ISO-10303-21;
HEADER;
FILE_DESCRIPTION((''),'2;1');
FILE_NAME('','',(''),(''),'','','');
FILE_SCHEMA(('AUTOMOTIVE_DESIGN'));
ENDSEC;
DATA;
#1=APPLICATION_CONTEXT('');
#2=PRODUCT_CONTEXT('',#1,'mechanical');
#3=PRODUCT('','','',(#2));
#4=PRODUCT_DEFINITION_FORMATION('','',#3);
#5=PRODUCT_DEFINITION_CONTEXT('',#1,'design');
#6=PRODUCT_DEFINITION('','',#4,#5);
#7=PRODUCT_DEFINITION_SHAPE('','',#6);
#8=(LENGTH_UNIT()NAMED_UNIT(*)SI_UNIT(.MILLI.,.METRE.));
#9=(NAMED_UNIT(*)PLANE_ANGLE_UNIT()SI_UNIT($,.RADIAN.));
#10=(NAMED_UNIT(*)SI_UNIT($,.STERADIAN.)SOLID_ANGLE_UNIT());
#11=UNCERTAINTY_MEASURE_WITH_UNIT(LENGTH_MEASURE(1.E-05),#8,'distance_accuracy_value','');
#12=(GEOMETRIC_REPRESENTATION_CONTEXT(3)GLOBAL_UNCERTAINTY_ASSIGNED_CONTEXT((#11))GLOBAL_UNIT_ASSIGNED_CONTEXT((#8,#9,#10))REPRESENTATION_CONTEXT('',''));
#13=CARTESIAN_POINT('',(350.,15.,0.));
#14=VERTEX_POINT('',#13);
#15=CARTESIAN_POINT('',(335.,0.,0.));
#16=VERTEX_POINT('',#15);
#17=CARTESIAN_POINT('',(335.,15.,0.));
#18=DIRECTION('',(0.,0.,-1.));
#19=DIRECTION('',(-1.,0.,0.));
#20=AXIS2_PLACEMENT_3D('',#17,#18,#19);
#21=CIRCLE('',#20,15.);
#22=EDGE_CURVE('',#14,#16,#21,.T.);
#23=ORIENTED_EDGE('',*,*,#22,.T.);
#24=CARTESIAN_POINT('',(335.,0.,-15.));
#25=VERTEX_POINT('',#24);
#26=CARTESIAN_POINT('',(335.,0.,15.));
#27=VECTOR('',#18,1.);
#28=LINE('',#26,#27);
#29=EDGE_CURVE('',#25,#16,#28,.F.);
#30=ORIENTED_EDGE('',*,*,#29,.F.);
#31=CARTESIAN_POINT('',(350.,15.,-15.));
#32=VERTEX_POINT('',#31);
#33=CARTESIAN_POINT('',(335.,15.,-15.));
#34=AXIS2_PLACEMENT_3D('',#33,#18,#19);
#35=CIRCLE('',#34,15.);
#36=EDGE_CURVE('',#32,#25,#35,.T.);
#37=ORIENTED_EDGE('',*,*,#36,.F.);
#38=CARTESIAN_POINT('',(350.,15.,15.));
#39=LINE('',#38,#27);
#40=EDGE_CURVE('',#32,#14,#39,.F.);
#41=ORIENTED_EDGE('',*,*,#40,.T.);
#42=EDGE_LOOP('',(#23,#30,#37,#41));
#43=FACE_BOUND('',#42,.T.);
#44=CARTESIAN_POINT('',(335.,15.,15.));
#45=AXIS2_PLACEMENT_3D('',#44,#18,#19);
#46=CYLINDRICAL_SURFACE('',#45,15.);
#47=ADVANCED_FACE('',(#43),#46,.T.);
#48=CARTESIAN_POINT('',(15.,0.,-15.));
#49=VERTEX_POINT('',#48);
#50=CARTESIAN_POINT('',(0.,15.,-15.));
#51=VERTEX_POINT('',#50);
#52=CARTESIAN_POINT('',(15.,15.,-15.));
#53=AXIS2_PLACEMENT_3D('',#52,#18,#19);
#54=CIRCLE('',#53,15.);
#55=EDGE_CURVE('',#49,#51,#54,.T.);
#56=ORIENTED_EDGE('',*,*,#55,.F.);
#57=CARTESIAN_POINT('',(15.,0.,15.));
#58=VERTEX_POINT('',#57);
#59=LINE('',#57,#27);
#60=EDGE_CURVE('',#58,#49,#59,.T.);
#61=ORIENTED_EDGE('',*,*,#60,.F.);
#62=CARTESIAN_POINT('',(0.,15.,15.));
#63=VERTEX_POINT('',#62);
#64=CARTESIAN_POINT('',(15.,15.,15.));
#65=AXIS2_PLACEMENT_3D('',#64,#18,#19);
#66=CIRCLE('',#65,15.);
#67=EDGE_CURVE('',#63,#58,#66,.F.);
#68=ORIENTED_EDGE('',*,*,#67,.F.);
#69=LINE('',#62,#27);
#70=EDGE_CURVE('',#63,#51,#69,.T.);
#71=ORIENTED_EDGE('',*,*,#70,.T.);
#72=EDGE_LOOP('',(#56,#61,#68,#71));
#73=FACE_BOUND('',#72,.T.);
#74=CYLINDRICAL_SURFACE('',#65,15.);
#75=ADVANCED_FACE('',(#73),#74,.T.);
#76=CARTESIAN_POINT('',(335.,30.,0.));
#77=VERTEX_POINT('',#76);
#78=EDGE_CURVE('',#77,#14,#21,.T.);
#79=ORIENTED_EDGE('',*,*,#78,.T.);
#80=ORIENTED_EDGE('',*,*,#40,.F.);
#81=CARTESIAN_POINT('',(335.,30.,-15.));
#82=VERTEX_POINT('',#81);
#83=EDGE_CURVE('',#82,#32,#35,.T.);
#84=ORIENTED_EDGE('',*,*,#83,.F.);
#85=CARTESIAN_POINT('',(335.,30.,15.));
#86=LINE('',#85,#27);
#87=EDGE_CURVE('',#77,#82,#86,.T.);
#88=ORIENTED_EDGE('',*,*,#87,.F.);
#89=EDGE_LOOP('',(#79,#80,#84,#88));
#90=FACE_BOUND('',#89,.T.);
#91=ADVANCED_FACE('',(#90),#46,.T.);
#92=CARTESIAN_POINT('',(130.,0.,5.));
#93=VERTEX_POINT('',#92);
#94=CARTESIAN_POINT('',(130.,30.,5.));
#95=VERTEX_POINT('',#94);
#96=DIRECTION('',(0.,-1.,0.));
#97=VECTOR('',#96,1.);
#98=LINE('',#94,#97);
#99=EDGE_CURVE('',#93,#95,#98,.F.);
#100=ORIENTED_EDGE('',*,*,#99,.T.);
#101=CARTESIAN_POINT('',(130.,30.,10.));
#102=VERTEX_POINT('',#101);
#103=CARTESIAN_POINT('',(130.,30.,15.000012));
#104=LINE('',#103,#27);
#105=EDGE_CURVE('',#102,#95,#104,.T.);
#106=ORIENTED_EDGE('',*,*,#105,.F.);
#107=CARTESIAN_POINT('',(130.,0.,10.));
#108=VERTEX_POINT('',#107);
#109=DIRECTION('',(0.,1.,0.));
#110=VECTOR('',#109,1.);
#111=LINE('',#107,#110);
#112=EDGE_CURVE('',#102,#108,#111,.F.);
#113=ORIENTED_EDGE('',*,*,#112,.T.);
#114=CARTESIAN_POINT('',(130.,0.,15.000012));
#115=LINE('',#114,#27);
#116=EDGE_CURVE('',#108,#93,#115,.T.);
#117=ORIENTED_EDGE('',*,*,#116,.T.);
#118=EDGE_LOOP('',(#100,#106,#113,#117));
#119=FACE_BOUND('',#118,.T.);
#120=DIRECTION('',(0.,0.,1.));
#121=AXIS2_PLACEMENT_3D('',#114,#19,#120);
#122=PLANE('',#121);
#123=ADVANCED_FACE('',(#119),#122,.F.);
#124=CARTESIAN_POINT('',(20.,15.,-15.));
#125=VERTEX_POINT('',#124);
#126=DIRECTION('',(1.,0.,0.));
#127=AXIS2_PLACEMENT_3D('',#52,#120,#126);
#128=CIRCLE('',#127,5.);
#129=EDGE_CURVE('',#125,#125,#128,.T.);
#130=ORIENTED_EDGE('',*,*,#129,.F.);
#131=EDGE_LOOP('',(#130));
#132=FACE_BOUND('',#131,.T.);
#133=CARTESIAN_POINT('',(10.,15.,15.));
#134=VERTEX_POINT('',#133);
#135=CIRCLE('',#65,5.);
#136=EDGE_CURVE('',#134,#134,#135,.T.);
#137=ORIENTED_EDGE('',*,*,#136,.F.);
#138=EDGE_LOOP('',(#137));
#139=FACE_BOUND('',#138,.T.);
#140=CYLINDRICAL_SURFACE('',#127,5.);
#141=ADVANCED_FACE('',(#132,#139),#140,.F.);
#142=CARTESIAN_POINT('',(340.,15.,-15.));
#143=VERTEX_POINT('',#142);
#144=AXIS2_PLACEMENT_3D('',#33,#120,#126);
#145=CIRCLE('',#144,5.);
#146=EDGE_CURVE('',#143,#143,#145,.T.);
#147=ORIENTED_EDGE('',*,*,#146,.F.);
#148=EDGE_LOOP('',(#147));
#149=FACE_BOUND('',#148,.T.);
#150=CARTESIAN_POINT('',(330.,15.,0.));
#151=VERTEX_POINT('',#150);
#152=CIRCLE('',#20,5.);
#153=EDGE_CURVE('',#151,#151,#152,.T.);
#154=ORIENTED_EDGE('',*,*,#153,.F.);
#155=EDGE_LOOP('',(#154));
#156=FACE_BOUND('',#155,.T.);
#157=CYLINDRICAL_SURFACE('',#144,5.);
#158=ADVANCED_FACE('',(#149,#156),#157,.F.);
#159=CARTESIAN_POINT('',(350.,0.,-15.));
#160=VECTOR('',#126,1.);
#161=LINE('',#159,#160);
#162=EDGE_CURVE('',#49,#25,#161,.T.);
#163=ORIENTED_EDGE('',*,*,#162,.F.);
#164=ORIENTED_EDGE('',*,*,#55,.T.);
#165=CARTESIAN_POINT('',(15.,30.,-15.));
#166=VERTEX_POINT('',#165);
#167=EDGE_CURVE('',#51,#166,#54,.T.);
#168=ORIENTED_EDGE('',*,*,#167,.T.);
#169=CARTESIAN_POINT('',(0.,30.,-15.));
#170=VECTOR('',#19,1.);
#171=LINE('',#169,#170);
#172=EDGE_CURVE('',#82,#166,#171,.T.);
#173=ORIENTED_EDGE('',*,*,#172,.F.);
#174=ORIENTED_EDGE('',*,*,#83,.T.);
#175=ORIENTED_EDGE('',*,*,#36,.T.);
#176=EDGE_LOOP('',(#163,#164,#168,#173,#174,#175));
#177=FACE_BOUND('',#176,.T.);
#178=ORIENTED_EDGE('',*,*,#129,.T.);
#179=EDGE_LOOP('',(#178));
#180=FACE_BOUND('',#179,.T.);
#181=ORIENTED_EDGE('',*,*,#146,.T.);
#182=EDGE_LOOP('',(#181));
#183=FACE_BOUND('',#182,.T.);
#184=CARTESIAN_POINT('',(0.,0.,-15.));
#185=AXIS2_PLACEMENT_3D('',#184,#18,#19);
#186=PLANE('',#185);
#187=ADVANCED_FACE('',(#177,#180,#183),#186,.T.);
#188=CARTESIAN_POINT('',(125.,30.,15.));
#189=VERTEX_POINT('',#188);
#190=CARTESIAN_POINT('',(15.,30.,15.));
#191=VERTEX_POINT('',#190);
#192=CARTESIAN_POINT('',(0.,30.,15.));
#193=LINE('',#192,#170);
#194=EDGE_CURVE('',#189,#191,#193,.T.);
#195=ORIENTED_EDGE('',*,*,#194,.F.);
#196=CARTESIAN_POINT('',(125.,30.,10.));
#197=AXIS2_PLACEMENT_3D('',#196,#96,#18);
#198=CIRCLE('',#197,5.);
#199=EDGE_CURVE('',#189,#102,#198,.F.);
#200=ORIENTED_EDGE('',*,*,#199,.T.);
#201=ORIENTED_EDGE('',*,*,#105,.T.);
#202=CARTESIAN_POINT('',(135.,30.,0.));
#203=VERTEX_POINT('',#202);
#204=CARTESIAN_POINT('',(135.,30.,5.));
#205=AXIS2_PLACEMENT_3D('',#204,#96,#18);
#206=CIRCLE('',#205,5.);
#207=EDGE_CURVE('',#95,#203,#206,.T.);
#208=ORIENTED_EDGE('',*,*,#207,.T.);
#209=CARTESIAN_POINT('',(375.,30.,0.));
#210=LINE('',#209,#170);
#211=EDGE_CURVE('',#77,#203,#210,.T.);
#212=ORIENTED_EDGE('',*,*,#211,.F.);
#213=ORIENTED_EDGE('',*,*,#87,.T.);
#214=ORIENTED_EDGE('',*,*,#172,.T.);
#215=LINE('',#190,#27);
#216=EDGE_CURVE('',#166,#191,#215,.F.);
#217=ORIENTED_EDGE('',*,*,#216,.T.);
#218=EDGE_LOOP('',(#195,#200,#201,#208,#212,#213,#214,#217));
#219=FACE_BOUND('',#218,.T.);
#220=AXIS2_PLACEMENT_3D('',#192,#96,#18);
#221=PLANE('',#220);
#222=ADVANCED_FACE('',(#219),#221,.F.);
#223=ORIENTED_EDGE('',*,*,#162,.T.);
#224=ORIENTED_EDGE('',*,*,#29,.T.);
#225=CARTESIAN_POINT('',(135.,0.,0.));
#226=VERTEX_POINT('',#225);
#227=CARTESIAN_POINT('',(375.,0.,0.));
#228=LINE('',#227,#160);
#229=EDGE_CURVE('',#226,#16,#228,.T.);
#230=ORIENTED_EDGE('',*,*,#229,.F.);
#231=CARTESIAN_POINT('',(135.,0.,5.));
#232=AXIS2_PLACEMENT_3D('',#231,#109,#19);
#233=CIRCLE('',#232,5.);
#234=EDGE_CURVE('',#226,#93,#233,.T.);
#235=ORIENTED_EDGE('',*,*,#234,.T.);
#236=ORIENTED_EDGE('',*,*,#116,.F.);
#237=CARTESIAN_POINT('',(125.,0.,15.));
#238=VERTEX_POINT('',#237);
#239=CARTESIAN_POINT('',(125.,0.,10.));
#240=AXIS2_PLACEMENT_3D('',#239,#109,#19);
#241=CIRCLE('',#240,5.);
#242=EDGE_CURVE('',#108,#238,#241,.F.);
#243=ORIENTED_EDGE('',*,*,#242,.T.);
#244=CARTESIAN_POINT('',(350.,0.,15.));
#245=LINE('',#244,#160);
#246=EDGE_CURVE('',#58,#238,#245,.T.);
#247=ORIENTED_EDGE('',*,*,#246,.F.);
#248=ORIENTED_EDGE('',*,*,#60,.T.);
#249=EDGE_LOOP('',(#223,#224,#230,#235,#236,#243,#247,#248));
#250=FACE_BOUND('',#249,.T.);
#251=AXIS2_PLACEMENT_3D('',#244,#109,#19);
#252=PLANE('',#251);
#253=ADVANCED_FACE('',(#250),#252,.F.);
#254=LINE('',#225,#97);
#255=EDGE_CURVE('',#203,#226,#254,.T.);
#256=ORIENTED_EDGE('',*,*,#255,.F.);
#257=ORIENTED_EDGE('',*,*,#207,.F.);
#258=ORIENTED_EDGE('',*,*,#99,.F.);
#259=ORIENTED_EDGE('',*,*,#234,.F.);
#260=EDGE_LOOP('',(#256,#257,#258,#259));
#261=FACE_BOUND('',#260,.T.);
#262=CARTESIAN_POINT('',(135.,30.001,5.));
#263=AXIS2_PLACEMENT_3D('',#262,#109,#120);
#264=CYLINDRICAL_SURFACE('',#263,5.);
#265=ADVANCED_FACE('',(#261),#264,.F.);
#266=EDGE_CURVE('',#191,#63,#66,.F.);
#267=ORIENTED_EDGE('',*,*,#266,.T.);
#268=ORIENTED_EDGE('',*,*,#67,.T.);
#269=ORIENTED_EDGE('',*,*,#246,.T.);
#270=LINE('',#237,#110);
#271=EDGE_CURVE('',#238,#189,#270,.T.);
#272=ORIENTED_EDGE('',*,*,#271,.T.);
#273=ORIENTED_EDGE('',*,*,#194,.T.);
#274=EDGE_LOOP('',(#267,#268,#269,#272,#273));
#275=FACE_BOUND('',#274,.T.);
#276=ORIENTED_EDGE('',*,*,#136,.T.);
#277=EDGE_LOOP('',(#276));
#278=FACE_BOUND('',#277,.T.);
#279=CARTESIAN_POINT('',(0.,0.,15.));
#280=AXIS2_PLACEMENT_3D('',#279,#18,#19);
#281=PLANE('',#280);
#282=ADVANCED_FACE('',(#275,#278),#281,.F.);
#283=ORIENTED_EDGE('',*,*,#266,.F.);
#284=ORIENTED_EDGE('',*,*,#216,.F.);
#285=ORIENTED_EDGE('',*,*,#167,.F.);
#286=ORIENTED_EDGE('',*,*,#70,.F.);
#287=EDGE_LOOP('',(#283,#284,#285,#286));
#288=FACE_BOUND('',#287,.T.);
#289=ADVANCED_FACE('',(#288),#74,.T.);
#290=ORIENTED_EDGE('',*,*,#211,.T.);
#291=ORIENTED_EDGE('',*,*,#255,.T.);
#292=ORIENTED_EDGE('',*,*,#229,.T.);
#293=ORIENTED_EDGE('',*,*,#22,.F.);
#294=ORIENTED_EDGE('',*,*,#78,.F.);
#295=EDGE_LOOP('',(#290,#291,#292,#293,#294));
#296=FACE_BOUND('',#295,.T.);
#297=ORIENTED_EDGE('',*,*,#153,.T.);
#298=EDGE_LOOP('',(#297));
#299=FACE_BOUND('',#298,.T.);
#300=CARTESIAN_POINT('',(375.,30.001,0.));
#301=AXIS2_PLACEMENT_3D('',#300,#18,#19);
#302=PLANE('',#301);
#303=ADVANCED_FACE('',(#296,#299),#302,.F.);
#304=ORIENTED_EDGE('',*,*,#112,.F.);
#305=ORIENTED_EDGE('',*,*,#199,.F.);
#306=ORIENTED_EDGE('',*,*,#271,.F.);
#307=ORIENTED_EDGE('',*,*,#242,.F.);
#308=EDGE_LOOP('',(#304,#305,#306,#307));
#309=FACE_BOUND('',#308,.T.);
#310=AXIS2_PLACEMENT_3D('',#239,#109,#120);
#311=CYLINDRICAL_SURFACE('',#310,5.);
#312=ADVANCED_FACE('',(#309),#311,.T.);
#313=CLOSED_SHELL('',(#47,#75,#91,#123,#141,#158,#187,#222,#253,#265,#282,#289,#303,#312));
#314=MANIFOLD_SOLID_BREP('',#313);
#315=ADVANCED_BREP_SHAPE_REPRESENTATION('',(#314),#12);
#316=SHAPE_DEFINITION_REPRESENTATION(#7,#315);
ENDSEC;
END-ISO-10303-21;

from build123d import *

# Parameters (mm, degrees)
SKETCH1_W               = 350
SKETCH1_H               = 30
BOSS_EXTRUDE1_DEPTH     = 15
CUT_EXTRUDE2_DEPTH      = 353.562051276
CUT_EXTRUDE2_DEPTH_BACK = 353.562051276
SKETCH3_R               = 5
FILLET3_R               = 15
CUT_EXTRUDE3_DEPTH      = 353.562051276
CUT_EXTRUDE3_DEPTH_BACK = 10
SKETCH4_R               = 5
FILLET4_R               = 5
CUT_EXTRUDE4_REACH      = 353.603
SKETCH6_W               = 245
SKETCH6_H               = 5
FILLET6_R               = 5


with BuildPart() as part:
    # Sketch1 → Boss-Extrude1 (new, symmetric)
    with BuildSketch(Plane.XY):
        with Locations((175, 15)):
            Rectangle(SKETCH1_W, SKETCH1_H)
    extrude(amount=BOSS_EXTRUDE1_DEPTH, both=True)

    # Sketch3 → Cut-Extrude2 (cut, two sides: drawn at the far end of the back side and taken through both)
    with BuildSketch(Plane.XY.offset(15).offset(-CUT_EXTRUDE2_DEPTH_BACK)):
        with Locations((15, 15)):
            Circle(SKETCH3_R)
        with Locations((335, 15)):
            Circle(SKETCH3_R)
    extrude(amount=CUT_EXTRUDE2_DEPTH + CUT_EXTRUDE2_DEPTH_BACK, mode=Mode.SUBTRACT)

    # Fillet3
    fillet3_edges = [part.edges().sort_by_distance(p)[0] for p in [
        (350, 0, 0),
        (350, 30, 0),
        (0, 0, 0),
        (0, 30, 0),
    ]]
    fillet(fillet3_edges, radius=FILLET3_R - 0.0001)  # a hair under: the kernel refuses the full size

    # Sketch4 → Cut-Extrude3 (cut, two sides: drawn at the far end of the back side and taken through both)
    with BuildSketch(Plane.XY.offset(15).offset(-CUT_EXTRUDE3_DEPTH_BACK)):
        with BuildLine():
            Line((130, 30), (130, 0))
            Line((130, 0), (335.0001, 0))
            ThreePointArc((335.0001, 0), (345.606631007, 4.393368993), (350, 14.9999))
            Line((350, 14.9999), (350, 15.0001))
            ThreePointArc((350, 15.0001), (345.606631007, 25.606631007), (335.0001, 30))
            Line((335.0001, 30), (130, 30))
        make_face()
        with Locations((335, 15)):
            Circle(SKETCH4_R, mode=Mode.SUBTRACT)
    extrude(amount=CUT_EXTRUDE3_DEPTH + CUT_EXTRUDE3_DEPTH_BACK, mode=Mode.SUBTRACT)

    # Fillet4
    fillet4_edges = [part.edges().sort_by_distance(p)[0] for p in [
        (130, 15, 15),
    ]]
    fillet(fillet4_edges, radius=FILLET4_R)

    # Sketch6 → Cut-Extrude4 (cut, up to next)
    with BuildSketch(Plane.XZ, mode=Mode.PRIVATE) as cut_extrude4_sk1:
        with Locations((252.5, 2.5)):
            Rectangle(SKETCH6_W, SKETCH6_H)
    cut_extrude4_tool1 = extrude(cut_extrude4_sk1.sketch, amount=-CUT_EXTRUDE4_REACH, mode=Mode.PRIVATE) & part.part
    add(cut_extrude4_tool1.solids().sort_by_distance((252.5, 0, 2.5))[0], mode=Mode.SUBTRACT)

    # Fillet6
    fillet6_edges = [part.edges().sort_by_distance(p)[0] for p in [
        (130, 15, 0),
    ]]
    fillet(fillet6_edges, radius=FILLET6_R)


solid = part.part
